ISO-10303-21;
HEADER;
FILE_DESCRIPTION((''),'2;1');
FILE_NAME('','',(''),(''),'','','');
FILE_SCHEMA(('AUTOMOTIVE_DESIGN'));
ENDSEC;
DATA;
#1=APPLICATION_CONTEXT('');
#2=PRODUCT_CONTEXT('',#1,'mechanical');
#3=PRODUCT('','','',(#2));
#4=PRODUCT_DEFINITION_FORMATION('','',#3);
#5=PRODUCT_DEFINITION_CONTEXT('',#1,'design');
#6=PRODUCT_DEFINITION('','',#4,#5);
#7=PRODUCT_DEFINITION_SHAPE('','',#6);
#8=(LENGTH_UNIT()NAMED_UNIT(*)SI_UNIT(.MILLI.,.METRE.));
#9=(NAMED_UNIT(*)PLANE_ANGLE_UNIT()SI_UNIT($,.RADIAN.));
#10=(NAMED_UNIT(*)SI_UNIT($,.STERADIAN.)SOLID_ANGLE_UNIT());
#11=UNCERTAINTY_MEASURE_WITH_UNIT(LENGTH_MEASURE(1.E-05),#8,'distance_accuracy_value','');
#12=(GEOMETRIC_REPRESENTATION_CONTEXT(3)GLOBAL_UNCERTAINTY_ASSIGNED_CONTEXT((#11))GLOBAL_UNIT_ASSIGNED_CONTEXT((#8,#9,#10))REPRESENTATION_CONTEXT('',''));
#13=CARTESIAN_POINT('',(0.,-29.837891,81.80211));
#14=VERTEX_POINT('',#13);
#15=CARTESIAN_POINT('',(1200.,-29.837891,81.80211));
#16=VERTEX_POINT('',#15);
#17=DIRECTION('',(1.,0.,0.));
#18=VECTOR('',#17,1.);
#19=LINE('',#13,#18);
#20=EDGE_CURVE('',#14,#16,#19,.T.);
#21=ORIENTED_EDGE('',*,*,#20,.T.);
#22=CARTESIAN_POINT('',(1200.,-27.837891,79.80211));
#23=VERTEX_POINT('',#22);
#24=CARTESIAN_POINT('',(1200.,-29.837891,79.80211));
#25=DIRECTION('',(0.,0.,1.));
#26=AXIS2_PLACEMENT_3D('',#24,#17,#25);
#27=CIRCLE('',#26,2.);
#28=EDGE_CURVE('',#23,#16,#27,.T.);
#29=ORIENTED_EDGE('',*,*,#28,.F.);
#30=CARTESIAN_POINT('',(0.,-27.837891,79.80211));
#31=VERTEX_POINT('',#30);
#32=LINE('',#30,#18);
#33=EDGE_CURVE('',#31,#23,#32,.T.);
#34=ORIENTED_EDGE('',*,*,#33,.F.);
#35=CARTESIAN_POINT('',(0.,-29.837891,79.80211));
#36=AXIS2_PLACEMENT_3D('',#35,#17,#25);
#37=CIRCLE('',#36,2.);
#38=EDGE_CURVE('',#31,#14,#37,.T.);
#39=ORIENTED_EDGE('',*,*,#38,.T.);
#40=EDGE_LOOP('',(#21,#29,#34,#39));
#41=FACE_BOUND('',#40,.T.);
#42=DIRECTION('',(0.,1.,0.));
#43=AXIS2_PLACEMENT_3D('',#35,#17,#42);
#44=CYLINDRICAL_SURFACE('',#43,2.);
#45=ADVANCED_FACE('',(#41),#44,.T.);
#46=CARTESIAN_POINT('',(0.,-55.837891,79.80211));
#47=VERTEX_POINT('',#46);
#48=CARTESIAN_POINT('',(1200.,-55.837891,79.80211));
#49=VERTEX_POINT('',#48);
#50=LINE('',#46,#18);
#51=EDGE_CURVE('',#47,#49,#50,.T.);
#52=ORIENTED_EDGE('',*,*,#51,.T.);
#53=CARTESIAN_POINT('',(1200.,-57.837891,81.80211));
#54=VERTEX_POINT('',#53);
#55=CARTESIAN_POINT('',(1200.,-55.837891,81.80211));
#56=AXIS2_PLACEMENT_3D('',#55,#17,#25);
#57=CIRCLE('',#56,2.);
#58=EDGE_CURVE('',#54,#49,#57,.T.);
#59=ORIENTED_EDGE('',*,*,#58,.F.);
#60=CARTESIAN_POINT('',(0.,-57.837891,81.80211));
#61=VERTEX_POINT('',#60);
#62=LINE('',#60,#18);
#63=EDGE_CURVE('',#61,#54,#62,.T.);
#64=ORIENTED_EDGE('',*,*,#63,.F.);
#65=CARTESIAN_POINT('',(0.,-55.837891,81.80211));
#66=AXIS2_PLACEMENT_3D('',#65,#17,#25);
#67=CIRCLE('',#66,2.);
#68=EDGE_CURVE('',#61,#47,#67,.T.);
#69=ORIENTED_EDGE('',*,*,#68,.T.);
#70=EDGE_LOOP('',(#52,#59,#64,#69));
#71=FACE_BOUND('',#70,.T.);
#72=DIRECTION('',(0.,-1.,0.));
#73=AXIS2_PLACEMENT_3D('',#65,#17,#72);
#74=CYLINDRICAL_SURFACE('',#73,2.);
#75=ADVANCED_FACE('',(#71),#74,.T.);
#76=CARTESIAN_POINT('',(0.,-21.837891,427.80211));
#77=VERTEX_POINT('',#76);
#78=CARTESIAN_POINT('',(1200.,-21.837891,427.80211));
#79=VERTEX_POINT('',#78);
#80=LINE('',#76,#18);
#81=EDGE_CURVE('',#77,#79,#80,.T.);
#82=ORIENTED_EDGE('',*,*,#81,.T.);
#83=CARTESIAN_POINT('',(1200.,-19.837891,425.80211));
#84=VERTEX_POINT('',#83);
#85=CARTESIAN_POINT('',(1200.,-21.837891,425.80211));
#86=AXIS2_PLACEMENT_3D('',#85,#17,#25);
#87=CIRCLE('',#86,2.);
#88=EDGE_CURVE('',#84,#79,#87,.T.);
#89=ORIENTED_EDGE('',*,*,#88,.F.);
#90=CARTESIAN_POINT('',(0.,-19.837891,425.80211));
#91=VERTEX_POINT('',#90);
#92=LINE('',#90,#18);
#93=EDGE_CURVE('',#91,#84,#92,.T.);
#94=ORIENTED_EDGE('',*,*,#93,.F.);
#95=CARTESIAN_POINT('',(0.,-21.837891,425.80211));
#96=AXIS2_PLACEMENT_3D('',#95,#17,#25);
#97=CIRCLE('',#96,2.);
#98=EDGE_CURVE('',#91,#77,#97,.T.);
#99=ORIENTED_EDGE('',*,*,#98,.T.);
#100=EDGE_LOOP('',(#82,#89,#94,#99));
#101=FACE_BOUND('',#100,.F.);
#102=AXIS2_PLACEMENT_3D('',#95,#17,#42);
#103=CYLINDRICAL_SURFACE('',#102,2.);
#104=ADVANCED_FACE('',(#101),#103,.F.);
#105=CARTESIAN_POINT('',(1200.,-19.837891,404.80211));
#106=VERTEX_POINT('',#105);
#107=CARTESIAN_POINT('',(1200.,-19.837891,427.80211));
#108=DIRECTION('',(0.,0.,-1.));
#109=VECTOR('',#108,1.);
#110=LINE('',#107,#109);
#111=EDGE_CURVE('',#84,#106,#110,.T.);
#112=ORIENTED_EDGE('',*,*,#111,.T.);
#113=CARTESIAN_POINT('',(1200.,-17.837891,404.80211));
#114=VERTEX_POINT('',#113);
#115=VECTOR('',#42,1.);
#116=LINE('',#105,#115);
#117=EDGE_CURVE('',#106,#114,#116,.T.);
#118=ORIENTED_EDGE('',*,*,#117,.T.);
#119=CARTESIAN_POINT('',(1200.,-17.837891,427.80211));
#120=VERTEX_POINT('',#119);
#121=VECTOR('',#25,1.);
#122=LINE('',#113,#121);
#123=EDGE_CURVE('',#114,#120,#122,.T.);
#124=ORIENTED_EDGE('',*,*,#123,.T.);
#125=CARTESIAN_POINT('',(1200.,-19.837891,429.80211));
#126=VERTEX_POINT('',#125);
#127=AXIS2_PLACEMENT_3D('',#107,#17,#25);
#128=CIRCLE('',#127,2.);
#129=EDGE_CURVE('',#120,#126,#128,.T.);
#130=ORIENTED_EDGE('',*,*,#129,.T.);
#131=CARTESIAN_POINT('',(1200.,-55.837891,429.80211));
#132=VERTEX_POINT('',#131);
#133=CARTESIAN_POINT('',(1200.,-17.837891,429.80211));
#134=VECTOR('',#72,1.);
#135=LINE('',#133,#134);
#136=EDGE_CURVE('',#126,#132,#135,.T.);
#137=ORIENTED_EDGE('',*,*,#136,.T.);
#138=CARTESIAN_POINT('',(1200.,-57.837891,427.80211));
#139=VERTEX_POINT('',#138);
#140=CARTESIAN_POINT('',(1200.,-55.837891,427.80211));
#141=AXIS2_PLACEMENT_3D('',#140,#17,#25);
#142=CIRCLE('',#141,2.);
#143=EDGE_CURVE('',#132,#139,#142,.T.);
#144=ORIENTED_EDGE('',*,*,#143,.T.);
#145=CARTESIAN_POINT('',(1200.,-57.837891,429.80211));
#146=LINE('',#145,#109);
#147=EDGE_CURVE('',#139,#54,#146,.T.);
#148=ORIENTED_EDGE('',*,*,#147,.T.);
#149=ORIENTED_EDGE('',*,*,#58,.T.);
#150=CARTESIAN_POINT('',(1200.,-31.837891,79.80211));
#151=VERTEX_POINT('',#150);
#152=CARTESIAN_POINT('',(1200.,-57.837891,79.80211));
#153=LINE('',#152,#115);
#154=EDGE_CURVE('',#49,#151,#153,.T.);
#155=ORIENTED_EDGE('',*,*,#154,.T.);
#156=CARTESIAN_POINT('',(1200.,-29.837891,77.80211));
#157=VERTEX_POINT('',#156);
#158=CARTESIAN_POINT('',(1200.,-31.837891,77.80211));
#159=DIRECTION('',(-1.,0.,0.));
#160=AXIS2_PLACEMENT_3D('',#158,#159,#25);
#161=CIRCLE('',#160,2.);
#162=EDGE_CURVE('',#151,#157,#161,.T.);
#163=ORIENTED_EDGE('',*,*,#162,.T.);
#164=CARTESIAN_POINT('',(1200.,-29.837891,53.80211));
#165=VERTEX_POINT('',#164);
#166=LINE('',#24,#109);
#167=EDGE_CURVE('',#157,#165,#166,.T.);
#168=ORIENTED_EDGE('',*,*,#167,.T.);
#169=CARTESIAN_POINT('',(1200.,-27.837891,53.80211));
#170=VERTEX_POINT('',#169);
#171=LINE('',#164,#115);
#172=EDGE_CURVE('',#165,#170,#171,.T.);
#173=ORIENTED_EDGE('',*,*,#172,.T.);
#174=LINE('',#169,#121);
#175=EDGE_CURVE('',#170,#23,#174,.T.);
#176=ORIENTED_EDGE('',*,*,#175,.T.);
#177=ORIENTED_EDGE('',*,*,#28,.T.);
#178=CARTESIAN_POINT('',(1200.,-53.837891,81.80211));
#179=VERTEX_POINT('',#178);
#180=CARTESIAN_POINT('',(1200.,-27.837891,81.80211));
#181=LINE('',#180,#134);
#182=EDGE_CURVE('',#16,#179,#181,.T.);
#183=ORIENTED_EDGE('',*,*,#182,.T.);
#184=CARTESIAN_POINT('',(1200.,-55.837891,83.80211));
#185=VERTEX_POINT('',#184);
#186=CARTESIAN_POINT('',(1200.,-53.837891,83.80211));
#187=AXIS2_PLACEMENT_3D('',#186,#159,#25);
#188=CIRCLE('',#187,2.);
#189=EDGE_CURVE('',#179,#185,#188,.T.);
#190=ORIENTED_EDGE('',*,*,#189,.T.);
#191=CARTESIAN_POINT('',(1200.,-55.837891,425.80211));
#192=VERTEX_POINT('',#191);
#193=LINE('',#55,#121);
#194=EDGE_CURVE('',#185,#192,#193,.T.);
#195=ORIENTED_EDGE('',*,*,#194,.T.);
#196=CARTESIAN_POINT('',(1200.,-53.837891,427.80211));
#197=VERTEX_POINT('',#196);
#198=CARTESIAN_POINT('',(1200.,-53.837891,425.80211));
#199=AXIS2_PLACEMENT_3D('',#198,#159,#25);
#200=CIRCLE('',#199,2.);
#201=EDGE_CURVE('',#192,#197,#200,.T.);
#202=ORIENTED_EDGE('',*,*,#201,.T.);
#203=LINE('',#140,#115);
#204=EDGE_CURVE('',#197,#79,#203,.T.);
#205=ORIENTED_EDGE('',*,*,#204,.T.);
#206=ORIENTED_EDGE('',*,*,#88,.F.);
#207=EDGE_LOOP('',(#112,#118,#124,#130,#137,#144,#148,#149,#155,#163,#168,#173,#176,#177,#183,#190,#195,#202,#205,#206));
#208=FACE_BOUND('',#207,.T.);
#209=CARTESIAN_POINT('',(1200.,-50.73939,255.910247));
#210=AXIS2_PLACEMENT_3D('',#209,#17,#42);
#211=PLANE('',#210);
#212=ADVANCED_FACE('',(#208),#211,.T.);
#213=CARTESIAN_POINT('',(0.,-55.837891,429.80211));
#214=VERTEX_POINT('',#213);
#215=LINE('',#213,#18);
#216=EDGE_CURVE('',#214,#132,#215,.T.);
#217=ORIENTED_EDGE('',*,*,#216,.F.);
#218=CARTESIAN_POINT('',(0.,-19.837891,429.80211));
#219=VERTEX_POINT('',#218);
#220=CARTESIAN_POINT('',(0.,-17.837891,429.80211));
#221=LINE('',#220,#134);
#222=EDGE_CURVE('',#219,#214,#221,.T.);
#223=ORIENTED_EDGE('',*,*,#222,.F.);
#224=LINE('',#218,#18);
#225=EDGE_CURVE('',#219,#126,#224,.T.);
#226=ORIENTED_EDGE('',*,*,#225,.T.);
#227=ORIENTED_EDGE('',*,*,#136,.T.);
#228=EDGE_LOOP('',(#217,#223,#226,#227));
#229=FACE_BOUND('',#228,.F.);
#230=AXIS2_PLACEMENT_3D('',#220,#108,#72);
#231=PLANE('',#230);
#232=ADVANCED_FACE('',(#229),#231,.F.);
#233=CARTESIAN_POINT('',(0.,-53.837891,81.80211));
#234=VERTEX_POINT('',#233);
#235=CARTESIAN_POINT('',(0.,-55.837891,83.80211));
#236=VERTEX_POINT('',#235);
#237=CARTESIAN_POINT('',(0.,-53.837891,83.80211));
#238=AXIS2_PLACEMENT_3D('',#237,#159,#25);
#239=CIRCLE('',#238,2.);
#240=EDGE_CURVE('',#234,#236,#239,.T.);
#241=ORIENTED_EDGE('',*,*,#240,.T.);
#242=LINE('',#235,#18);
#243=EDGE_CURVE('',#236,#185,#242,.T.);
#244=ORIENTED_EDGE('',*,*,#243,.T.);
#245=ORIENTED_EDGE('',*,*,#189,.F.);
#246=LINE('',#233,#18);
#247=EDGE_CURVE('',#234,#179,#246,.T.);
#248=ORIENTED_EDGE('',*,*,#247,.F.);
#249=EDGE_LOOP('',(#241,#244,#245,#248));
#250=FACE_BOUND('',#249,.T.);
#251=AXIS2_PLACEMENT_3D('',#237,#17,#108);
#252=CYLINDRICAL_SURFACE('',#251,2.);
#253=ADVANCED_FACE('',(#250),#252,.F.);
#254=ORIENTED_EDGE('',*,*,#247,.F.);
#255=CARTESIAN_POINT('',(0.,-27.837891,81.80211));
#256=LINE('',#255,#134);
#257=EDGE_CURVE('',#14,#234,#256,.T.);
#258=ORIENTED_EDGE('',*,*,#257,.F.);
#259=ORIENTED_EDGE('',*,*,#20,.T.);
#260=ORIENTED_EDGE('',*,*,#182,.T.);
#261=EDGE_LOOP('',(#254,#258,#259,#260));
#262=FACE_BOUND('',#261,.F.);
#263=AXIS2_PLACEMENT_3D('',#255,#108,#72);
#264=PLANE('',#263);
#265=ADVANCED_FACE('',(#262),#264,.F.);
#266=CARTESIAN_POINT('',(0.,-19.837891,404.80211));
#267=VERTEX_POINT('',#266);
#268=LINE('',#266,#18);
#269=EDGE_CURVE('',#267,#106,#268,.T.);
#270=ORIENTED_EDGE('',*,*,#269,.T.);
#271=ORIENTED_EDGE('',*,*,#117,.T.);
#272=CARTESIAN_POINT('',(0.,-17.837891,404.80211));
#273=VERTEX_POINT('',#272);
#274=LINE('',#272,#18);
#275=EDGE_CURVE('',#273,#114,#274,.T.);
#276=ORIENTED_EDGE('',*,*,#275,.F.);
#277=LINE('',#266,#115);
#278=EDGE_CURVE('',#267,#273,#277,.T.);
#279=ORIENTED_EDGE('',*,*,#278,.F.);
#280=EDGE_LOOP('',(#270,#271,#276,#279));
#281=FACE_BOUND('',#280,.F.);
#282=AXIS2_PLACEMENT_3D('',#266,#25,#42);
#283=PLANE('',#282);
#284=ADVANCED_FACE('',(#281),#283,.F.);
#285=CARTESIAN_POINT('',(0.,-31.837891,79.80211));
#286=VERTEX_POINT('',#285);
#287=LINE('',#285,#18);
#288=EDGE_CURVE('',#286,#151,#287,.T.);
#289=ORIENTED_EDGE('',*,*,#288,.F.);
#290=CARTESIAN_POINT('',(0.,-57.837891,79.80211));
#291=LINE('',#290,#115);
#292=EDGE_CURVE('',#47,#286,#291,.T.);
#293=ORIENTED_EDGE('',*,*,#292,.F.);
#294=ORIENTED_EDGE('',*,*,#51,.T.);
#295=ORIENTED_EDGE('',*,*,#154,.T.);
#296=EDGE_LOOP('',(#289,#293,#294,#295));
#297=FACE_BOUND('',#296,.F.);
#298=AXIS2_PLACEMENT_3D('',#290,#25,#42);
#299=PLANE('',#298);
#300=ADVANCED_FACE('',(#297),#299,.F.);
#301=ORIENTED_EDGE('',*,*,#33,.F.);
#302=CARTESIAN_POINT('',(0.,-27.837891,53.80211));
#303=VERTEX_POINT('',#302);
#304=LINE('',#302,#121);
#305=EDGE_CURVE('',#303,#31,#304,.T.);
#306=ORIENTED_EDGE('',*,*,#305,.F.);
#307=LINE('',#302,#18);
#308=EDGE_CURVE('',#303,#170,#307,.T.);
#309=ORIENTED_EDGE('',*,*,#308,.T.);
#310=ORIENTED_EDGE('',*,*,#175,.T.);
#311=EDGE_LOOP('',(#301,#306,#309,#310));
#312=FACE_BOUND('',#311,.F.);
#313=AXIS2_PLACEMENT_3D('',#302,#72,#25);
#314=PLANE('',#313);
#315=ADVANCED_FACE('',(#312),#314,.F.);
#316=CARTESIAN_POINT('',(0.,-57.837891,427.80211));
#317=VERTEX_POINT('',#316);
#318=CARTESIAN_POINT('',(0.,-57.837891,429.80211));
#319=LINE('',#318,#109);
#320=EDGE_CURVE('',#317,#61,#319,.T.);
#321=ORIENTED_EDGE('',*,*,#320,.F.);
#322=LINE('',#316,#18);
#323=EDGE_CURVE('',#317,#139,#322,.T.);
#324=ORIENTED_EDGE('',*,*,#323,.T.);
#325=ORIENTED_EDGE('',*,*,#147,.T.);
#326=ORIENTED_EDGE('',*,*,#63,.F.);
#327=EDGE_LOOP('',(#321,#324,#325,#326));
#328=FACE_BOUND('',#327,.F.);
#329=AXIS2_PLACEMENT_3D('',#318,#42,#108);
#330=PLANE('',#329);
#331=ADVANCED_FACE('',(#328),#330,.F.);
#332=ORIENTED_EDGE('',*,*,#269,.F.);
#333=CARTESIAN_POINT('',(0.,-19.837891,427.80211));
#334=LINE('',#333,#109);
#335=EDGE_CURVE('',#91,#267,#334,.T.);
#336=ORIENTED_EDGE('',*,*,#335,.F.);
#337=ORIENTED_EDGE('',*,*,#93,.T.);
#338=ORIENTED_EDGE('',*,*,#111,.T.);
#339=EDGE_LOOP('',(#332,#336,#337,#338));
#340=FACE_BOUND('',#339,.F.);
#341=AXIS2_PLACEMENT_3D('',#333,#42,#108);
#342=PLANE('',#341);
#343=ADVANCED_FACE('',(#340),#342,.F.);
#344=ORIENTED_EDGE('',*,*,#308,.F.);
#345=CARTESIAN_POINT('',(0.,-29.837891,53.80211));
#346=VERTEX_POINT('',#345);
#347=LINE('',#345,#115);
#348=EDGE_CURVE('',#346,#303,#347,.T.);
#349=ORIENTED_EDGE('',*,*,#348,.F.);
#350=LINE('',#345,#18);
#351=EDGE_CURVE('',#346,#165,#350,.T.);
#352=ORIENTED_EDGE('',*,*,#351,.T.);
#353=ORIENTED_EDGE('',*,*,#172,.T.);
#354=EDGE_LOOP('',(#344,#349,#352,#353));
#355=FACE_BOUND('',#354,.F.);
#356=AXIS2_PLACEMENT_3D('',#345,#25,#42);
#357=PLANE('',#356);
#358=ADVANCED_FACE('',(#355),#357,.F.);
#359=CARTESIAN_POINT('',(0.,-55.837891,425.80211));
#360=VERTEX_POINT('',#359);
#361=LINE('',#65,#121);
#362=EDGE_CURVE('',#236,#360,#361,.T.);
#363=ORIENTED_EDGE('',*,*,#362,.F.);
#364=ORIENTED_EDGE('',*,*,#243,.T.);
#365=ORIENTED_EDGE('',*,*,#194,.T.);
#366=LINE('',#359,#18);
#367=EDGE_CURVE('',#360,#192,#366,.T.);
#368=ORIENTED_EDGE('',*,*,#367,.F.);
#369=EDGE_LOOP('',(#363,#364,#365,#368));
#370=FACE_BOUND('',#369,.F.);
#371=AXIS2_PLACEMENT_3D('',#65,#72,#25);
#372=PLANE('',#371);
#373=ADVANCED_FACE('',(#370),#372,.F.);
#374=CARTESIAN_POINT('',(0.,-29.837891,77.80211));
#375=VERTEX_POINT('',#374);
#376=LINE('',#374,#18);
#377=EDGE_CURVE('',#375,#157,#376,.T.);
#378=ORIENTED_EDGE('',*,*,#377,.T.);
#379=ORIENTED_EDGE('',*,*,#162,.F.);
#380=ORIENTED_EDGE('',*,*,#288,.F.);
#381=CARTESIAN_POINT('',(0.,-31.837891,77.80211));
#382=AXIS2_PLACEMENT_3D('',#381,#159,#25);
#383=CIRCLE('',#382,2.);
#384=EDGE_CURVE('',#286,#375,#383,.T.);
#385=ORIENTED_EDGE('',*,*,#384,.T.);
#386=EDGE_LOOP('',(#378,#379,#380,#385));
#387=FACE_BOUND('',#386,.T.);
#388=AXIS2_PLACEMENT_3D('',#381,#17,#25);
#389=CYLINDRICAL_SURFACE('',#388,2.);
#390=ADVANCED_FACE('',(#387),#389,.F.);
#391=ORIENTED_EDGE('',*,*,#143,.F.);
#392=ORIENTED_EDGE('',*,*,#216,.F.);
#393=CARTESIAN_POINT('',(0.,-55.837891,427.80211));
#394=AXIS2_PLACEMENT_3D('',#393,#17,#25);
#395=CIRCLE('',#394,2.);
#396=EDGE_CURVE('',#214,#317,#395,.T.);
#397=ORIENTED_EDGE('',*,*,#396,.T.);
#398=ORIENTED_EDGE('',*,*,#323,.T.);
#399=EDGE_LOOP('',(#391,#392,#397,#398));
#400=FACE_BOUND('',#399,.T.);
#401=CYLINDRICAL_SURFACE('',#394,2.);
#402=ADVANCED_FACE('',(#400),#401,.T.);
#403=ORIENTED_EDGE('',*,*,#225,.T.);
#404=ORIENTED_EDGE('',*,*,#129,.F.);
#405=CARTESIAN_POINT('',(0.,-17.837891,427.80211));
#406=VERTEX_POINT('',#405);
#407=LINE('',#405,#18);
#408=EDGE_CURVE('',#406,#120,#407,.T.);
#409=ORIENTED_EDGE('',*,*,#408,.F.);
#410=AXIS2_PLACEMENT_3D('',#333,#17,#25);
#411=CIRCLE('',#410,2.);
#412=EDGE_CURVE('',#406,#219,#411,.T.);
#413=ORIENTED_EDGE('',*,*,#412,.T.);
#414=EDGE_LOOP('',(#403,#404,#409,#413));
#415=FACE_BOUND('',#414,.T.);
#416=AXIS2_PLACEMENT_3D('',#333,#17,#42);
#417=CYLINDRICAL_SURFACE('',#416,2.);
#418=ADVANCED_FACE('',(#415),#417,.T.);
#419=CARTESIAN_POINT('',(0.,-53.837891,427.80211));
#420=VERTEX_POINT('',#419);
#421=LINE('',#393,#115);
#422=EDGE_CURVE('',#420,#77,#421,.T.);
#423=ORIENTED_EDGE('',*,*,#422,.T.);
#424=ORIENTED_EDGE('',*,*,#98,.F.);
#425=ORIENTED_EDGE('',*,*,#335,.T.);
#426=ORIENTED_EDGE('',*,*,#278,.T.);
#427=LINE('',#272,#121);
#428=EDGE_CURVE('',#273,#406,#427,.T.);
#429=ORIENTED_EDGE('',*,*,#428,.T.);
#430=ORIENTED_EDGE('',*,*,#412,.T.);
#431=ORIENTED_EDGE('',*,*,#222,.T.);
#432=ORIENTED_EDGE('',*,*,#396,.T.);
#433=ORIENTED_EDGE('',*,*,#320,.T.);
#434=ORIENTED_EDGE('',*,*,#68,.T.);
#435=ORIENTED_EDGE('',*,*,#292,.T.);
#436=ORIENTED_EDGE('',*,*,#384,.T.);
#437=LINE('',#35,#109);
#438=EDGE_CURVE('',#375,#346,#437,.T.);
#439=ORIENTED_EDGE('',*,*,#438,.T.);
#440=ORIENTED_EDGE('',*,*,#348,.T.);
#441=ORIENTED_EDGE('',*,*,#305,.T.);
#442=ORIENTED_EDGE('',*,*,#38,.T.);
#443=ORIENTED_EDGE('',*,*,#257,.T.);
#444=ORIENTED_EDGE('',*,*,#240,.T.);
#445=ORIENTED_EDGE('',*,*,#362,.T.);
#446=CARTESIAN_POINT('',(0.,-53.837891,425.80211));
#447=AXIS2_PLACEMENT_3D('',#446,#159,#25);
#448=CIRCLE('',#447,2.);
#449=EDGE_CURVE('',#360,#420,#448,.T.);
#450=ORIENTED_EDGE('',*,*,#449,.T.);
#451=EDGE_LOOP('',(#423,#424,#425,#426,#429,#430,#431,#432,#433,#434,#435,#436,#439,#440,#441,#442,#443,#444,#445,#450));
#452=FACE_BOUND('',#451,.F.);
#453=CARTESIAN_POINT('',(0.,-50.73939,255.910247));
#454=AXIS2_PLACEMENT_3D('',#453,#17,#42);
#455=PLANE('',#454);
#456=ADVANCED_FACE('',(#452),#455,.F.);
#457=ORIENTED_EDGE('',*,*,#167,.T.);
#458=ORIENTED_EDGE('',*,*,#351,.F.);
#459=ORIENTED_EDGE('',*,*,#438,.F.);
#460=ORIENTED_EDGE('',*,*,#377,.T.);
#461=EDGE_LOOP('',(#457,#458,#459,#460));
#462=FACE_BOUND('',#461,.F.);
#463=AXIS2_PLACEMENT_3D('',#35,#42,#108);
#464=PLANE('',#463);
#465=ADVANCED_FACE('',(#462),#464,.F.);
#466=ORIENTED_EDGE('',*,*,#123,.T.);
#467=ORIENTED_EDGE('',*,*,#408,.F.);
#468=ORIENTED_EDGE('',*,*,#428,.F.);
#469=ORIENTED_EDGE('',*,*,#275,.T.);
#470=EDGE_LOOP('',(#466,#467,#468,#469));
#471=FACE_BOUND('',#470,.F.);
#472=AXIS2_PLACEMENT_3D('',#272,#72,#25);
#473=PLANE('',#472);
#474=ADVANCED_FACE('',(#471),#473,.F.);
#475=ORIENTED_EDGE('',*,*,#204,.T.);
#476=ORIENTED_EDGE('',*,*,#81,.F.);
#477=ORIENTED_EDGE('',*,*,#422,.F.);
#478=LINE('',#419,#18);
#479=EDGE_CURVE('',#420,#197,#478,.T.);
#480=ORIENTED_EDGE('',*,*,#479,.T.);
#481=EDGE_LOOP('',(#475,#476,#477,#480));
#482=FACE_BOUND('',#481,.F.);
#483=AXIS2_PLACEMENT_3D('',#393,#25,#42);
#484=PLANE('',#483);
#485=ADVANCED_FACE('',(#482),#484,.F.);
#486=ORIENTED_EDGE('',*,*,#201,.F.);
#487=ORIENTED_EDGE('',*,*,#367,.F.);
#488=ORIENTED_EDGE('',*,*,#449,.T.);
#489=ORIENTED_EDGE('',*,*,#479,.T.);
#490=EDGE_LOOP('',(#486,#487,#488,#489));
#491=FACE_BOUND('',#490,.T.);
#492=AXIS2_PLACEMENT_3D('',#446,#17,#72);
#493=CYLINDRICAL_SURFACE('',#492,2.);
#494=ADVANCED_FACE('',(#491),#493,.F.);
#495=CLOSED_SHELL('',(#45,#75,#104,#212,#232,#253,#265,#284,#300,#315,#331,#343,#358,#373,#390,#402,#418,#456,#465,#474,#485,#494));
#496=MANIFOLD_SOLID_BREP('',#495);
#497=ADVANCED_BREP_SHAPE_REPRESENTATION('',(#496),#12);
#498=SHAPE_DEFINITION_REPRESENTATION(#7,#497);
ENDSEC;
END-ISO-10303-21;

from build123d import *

# Parameters (mm, degrees)
F1_DEPTH = 1200
F2_R     = 2


# Not quite as in the source:
# - a feature names something its author has since deleted; it is built from what else it names


with BuildPart() as f1:
    # F0 (on Right) → F1 (new body)
    with BuildSketch(Plane.YZ):
        Polygon((-19.8378913403, 427.8021101952), (-19.8378913403, 404.8021101952), (-17.8378913403, 404.8021101952), (-17.8378913403, 429.8021101952), (-57.8378913403, 429.8021101952), (-57.8378913403, 79.8021101952), (-29.8378913403, 79.8021101952), (-29.8378913403, 53.8021101952), (-27.8378913403, 53.8021101952), (-27.8378913403, 81.8021101952), (-55.8378913403, 81.8021101952), (-55.8378913403, 427.8021101952), align=None)
    extrude(amount=F1_DEPTH)

    # F2
    f2_edges = [f1.edges().sort_by_distance(p)[0] for p in [
        (600, -57.837891, 429.80211),
        (600, -17.837891, 429.80211),
        (600, -57.837891, 79.80211),
        (600, -27.837891, 81.80211),
        (600, -55.837891, 81.80211),
        (600, -29.837891, 79.80211),
        (600, -19.837891, 427.80211),
        (600, -55.837891, 427.80211),
    ]]
    fillet(f2_edges, radius=F2_R)


solid = f1.part
